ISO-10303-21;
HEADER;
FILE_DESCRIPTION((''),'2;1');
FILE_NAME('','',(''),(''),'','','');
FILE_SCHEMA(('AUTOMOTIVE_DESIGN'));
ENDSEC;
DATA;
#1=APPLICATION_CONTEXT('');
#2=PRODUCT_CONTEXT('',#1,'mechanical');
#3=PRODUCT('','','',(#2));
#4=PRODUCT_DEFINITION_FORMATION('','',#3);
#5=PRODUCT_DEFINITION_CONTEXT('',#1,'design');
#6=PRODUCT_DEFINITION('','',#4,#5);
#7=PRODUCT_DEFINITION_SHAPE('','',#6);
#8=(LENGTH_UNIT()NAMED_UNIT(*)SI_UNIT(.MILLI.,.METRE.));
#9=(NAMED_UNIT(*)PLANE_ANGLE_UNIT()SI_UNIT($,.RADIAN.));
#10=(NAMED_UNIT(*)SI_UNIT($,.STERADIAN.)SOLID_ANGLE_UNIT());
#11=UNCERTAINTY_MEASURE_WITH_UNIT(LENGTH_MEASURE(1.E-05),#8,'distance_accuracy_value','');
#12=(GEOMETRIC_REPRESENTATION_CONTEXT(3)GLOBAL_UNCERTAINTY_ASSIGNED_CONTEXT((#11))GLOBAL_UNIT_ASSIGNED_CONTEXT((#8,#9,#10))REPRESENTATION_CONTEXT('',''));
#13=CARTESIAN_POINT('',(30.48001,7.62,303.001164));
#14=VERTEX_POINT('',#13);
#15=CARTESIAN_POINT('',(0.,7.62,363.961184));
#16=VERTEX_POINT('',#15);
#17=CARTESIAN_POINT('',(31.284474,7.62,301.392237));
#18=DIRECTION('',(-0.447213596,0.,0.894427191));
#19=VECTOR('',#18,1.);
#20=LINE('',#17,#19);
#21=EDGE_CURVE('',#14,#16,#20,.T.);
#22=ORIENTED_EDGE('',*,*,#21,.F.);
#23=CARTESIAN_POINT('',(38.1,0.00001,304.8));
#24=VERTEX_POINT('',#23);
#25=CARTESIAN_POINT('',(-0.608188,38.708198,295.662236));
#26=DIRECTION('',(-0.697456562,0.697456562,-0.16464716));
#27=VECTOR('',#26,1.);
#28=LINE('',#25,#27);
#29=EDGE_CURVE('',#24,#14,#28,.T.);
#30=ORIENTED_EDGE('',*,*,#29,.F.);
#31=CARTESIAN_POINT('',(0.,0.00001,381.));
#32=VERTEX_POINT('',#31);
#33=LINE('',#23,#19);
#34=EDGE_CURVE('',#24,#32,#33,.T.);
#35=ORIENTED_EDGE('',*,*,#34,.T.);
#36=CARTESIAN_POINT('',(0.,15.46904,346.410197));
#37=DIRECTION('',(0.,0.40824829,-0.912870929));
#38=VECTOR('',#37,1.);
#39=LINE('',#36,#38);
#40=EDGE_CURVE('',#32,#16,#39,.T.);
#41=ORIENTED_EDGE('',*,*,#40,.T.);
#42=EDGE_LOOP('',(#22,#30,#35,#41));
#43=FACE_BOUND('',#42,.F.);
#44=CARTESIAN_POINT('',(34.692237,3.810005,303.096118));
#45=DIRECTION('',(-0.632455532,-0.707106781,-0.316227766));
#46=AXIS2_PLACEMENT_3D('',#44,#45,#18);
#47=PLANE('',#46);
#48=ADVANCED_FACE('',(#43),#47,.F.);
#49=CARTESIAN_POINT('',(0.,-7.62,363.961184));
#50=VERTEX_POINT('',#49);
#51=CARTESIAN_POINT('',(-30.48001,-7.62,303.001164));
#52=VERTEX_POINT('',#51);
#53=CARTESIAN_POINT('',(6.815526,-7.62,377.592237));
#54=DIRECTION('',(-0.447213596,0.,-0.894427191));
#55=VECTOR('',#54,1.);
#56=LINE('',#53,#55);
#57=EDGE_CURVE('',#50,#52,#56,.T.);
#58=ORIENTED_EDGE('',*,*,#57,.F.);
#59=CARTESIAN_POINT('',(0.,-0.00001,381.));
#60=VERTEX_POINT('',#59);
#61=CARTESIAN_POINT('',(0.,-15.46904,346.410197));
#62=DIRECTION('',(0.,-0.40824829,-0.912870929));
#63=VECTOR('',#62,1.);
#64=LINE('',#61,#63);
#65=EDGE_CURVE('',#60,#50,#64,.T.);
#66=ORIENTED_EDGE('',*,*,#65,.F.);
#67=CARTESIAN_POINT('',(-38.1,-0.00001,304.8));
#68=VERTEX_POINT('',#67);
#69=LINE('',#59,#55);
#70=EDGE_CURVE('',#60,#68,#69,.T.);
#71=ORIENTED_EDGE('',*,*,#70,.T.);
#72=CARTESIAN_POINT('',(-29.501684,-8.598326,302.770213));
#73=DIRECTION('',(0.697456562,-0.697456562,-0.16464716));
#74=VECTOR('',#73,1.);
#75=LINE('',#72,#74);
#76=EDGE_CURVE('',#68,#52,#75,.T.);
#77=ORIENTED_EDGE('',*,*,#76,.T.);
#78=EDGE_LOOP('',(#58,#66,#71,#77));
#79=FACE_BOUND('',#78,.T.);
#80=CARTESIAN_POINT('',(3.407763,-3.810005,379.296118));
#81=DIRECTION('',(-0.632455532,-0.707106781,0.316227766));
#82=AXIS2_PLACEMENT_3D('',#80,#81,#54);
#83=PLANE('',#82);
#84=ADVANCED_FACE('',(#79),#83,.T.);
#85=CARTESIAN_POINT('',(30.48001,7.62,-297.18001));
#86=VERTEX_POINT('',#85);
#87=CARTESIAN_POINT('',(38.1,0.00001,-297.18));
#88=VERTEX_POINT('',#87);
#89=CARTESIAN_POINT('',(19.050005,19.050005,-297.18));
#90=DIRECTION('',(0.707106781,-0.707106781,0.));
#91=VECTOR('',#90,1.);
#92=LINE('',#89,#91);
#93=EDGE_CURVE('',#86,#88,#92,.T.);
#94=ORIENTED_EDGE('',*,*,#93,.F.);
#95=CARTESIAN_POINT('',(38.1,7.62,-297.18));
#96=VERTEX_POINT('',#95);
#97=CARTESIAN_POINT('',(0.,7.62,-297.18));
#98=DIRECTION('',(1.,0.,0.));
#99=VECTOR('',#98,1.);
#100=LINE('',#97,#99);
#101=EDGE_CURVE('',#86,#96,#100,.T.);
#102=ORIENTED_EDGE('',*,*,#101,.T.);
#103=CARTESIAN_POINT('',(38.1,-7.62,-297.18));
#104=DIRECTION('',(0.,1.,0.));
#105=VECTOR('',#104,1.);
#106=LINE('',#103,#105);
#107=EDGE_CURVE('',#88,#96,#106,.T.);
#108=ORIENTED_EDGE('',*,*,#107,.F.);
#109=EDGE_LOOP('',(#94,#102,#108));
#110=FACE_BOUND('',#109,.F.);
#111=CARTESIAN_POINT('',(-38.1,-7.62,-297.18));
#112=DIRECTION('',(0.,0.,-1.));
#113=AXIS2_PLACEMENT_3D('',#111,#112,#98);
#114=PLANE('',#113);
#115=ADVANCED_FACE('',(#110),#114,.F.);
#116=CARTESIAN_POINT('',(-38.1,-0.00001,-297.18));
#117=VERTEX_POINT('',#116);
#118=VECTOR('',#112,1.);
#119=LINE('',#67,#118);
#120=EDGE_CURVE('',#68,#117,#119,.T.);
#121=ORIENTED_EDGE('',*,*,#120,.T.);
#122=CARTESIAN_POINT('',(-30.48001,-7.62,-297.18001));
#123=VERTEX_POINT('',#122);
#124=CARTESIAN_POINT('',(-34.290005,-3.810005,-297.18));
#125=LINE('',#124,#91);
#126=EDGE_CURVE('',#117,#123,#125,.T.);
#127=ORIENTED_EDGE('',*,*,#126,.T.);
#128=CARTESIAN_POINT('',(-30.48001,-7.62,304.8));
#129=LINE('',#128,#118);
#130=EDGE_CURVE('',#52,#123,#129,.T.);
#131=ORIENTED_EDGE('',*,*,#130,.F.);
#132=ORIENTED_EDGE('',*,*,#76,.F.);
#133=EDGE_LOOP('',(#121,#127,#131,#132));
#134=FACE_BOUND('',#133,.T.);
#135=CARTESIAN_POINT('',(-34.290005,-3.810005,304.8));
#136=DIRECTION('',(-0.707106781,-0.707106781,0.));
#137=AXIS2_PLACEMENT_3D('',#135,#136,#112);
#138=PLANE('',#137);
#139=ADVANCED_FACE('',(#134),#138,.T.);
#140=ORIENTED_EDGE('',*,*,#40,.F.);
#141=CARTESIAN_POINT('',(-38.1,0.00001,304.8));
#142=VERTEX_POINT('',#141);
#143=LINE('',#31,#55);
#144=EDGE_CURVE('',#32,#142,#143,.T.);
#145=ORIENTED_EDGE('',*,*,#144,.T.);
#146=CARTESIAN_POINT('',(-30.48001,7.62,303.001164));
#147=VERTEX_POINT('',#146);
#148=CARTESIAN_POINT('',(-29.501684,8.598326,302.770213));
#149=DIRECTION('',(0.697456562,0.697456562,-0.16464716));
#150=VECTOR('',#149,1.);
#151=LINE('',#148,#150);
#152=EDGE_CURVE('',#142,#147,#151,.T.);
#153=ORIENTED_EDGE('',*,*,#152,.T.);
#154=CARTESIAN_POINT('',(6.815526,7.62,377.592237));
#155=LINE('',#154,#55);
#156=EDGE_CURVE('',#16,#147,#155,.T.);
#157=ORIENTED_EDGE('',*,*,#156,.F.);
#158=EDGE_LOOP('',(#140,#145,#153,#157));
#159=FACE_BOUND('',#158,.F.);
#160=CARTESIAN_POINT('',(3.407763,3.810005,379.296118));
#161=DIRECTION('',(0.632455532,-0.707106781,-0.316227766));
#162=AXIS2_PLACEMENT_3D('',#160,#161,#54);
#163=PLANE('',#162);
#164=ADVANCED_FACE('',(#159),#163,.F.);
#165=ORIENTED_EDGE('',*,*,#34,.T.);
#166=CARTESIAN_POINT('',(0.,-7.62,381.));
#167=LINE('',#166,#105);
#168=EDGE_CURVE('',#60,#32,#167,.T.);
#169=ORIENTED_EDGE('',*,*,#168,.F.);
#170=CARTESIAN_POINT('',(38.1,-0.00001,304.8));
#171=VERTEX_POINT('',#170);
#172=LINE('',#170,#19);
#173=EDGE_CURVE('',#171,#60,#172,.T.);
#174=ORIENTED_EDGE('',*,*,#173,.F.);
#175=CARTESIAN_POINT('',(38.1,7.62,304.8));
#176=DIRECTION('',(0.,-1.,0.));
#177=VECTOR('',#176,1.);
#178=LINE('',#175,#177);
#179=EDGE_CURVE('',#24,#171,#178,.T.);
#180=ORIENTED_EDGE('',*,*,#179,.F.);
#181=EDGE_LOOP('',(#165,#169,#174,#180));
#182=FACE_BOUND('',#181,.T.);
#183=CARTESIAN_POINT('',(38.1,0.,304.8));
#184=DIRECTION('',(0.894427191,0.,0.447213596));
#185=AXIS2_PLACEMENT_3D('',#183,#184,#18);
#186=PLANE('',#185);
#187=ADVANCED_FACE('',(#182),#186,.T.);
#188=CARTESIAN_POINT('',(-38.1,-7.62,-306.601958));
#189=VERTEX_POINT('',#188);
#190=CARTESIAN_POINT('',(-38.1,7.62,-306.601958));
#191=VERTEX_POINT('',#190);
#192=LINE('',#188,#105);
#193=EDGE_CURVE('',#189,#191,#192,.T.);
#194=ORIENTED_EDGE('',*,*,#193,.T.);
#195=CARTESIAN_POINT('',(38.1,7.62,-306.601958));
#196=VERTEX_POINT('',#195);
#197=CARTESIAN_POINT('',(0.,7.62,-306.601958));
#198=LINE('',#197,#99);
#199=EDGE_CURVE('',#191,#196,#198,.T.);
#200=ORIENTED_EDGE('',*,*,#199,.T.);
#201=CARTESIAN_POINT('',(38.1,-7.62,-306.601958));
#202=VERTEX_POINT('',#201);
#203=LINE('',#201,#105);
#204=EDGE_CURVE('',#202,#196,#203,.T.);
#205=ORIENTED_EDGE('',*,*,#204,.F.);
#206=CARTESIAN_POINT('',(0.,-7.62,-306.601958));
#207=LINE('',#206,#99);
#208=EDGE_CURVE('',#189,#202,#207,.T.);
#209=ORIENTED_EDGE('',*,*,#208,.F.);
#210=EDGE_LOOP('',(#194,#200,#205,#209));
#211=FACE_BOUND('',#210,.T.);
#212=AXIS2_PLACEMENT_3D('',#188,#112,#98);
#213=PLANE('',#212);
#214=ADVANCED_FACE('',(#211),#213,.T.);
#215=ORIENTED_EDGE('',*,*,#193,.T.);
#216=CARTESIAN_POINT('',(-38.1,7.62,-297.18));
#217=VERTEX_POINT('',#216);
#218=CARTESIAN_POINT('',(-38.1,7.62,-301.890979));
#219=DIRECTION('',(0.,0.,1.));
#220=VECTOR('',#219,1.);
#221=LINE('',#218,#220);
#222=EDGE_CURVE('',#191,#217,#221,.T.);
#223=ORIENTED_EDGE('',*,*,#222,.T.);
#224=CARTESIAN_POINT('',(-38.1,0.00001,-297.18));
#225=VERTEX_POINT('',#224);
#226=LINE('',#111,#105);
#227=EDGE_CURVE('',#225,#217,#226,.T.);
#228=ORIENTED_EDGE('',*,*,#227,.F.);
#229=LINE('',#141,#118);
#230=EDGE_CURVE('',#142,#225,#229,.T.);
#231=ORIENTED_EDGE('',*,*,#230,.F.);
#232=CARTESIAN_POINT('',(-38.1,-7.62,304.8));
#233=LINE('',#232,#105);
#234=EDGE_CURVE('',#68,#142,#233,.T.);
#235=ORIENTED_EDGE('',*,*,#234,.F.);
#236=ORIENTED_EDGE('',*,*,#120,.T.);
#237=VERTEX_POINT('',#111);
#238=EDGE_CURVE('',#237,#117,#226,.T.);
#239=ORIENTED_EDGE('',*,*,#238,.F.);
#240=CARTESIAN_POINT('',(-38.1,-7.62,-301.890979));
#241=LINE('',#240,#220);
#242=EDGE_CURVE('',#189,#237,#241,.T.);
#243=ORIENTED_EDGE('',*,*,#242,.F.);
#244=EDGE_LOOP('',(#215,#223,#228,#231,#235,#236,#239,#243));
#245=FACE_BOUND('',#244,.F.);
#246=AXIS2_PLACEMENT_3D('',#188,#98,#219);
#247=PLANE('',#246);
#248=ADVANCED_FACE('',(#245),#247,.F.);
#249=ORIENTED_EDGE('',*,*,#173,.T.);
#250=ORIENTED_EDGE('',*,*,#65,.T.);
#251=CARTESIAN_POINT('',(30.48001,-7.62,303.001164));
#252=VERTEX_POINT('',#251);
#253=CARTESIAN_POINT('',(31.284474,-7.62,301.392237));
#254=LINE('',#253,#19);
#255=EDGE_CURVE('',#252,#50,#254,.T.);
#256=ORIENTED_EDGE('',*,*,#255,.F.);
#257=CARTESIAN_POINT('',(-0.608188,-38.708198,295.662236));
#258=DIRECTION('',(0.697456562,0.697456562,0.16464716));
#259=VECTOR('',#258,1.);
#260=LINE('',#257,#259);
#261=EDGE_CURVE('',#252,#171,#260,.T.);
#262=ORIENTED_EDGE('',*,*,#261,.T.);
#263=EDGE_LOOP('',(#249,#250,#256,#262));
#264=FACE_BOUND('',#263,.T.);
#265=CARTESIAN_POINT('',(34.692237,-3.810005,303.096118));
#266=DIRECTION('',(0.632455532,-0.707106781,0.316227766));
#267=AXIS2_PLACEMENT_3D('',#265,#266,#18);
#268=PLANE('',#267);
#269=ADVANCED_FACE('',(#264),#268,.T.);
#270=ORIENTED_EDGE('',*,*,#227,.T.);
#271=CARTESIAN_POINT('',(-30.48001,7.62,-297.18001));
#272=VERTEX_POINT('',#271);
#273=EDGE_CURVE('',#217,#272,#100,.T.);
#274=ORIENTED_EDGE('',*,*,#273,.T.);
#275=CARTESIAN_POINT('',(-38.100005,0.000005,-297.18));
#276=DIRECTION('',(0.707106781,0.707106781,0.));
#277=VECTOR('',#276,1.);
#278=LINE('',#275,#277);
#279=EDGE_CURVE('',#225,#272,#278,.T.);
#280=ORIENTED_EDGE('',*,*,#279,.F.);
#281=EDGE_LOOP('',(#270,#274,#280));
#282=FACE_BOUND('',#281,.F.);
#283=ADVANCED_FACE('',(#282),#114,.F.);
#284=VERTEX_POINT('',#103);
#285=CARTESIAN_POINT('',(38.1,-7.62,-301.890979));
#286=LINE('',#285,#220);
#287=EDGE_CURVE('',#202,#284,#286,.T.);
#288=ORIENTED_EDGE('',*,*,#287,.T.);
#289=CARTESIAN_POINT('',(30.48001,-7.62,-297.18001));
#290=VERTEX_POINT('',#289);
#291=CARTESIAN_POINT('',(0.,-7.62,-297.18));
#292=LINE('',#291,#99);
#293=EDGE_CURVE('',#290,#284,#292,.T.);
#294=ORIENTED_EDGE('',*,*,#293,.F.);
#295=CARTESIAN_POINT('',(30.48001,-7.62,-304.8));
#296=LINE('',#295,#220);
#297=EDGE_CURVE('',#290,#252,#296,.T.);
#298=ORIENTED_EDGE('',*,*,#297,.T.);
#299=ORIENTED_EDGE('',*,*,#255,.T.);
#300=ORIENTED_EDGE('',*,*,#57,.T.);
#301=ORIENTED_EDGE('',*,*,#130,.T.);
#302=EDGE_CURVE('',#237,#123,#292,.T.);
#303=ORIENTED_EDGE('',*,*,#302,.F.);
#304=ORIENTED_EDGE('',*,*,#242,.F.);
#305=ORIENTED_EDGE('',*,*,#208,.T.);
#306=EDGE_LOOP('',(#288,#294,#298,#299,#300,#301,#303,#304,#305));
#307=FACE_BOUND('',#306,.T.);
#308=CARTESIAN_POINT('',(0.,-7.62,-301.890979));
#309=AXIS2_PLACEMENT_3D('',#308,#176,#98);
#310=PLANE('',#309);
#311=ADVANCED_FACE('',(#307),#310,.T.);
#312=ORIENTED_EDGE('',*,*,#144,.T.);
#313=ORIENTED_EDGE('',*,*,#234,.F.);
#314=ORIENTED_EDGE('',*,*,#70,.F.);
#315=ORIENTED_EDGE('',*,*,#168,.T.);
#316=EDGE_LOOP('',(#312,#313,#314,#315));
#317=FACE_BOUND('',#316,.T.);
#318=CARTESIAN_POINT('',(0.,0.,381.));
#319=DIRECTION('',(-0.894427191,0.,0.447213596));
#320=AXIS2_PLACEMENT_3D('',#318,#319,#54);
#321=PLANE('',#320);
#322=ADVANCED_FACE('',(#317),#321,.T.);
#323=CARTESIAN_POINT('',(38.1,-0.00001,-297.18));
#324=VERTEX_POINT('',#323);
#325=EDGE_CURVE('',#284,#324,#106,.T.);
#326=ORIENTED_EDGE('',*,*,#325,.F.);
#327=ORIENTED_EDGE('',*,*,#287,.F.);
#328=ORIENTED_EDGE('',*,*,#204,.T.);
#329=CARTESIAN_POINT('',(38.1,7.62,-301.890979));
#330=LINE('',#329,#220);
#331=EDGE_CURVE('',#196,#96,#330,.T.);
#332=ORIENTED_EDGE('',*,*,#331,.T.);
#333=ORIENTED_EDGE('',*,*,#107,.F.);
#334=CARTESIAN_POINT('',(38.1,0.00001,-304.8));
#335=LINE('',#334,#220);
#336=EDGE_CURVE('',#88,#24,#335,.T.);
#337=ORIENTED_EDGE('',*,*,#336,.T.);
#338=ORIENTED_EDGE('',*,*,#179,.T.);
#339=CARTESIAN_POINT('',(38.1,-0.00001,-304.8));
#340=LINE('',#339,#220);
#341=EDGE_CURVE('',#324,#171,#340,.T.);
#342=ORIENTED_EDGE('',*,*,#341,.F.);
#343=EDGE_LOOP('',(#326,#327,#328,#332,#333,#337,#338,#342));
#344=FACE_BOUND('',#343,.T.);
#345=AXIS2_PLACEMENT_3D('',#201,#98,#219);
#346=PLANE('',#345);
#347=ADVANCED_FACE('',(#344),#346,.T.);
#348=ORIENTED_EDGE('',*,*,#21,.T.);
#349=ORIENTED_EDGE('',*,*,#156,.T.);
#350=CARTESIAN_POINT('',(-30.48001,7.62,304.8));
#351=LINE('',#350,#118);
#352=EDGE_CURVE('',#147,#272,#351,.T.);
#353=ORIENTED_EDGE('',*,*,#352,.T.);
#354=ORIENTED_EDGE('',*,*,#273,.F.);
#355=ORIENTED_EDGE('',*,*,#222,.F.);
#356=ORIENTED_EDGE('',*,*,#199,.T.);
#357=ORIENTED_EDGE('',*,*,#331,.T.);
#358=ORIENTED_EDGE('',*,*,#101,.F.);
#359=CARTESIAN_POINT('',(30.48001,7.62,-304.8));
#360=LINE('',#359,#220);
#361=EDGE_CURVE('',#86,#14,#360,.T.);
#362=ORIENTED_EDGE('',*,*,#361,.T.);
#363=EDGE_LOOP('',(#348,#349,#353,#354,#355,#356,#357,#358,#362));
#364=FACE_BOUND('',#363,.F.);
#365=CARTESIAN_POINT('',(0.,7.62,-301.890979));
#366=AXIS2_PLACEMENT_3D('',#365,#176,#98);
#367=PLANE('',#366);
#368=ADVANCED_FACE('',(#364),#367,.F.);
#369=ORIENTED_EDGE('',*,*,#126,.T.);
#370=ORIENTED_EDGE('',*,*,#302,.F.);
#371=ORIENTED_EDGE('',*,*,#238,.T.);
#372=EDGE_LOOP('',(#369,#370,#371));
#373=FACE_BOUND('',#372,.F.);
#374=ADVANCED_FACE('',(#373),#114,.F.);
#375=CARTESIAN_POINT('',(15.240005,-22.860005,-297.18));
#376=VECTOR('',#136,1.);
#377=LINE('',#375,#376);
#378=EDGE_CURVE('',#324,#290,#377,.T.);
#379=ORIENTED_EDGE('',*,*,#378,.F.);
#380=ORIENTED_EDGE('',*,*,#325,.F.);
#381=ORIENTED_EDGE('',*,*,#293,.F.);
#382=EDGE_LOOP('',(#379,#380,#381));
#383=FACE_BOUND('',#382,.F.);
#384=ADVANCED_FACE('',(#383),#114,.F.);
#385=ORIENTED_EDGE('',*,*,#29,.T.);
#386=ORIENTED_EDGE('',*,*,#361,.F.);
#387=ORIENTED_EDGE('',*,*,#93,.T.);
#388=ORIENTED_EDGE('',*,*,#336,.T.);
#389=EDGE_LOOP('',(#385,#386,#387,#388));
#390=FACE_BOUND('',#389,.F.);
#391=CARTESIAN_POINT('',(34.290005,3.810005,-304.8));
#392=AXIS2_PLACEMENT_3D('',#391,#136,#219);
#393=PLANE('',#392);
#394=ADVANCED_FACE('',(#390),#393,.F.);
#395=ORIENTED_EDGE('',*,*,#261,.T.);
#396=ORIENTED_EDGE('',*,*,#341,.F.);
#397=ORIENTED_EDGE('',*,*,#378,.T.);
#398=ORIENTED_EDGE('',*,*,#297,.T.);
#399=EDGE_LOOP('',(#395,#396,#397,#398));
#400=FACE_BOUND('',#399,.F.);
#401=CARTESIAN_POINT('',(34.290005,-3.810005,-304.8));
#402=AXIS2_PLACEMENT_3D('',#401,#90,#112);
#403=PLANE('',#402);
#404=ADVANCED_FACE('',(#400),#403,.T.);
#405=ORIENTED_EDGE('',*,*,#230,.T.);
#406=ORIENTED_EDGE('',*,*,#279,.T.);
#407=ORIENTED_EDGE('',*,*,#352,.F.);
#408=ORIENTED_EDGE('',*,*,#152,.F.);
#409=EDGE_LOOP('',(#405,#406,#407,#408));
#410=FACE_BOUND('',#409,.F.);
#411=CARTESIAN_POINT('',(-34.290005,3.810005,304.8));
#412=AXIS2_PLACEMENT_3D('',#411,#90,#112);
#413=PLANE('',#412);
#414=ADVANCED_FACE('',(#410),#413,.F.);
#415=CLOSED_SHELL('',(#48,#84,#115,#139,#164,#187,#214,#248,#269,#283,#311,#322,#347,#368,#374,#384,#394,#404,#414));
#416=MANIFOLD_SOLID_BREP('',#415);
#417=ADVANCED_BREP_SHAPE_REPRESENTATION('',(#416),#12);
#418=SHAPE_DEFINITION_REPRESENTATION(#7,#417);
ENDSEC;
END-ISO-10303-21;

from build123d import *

# Parameters (mm, degrees)
F0_W     = 76.2
F0_H     = 304.8
F1_DEPTH = 7.62
F2_SIZE  = 7.61999
F3_W     = 76.2
F3_H     = 9.4219583702
F4_DEPTH = 15.24


# Not quite as in the source:
# - a fillet or chamfer is up to 0.001 mm smaller than in the source, because OpenCascade refuses the exact size


with BuildPart() as f1:
    # F0 (on Front) → F1 (new body, symmetric)
    with BuildSketch(Plane.XZ):
        with Locations((0, -152.4)):
            Rectangle(F0_W, F0_H)
        with Locations((0, 152.4)):
            Rectangle(F0_W, F0_H)
        Polygon((-38.1, 304.8), (38.1, 304.8), (0, 381), align=None)
    extrude(amount=F1_DEPTH, both=True)

    # F2 (size 7.62 in the source; OpenCascade refuses exactly that, so slightly less here)
    f2_edges = [f1.edges().sort_by_distance(p)[0] for p in [
        (0, -7.62, -304.8),
        (38.1, -7.62, 0),
        (19.05, -7.62, 342.9),
        (-19.05, -7.62, 342.9),
        (-38.1, -7.62, 0),
        (0, 7.62, -304.8),
        (38.1, 7.62, 0),
        (19.05, 7.62, 342.9),
        (-19.05, 7.62, 342.9),
        (-38.1, 7.62, 0),
    ]]
    chamfer(f2_edges, length=F2_SIZE)

    # F3 (on face) → F4 (join)
    with BuildSketch(Plane.XZ.offset(7.62)):
        with Locations((0, -301.8909791851)):
            Rectangle(F3_W, F3_H)
    extrude(amount=-F4_DEPTH)


solid = f1.part
